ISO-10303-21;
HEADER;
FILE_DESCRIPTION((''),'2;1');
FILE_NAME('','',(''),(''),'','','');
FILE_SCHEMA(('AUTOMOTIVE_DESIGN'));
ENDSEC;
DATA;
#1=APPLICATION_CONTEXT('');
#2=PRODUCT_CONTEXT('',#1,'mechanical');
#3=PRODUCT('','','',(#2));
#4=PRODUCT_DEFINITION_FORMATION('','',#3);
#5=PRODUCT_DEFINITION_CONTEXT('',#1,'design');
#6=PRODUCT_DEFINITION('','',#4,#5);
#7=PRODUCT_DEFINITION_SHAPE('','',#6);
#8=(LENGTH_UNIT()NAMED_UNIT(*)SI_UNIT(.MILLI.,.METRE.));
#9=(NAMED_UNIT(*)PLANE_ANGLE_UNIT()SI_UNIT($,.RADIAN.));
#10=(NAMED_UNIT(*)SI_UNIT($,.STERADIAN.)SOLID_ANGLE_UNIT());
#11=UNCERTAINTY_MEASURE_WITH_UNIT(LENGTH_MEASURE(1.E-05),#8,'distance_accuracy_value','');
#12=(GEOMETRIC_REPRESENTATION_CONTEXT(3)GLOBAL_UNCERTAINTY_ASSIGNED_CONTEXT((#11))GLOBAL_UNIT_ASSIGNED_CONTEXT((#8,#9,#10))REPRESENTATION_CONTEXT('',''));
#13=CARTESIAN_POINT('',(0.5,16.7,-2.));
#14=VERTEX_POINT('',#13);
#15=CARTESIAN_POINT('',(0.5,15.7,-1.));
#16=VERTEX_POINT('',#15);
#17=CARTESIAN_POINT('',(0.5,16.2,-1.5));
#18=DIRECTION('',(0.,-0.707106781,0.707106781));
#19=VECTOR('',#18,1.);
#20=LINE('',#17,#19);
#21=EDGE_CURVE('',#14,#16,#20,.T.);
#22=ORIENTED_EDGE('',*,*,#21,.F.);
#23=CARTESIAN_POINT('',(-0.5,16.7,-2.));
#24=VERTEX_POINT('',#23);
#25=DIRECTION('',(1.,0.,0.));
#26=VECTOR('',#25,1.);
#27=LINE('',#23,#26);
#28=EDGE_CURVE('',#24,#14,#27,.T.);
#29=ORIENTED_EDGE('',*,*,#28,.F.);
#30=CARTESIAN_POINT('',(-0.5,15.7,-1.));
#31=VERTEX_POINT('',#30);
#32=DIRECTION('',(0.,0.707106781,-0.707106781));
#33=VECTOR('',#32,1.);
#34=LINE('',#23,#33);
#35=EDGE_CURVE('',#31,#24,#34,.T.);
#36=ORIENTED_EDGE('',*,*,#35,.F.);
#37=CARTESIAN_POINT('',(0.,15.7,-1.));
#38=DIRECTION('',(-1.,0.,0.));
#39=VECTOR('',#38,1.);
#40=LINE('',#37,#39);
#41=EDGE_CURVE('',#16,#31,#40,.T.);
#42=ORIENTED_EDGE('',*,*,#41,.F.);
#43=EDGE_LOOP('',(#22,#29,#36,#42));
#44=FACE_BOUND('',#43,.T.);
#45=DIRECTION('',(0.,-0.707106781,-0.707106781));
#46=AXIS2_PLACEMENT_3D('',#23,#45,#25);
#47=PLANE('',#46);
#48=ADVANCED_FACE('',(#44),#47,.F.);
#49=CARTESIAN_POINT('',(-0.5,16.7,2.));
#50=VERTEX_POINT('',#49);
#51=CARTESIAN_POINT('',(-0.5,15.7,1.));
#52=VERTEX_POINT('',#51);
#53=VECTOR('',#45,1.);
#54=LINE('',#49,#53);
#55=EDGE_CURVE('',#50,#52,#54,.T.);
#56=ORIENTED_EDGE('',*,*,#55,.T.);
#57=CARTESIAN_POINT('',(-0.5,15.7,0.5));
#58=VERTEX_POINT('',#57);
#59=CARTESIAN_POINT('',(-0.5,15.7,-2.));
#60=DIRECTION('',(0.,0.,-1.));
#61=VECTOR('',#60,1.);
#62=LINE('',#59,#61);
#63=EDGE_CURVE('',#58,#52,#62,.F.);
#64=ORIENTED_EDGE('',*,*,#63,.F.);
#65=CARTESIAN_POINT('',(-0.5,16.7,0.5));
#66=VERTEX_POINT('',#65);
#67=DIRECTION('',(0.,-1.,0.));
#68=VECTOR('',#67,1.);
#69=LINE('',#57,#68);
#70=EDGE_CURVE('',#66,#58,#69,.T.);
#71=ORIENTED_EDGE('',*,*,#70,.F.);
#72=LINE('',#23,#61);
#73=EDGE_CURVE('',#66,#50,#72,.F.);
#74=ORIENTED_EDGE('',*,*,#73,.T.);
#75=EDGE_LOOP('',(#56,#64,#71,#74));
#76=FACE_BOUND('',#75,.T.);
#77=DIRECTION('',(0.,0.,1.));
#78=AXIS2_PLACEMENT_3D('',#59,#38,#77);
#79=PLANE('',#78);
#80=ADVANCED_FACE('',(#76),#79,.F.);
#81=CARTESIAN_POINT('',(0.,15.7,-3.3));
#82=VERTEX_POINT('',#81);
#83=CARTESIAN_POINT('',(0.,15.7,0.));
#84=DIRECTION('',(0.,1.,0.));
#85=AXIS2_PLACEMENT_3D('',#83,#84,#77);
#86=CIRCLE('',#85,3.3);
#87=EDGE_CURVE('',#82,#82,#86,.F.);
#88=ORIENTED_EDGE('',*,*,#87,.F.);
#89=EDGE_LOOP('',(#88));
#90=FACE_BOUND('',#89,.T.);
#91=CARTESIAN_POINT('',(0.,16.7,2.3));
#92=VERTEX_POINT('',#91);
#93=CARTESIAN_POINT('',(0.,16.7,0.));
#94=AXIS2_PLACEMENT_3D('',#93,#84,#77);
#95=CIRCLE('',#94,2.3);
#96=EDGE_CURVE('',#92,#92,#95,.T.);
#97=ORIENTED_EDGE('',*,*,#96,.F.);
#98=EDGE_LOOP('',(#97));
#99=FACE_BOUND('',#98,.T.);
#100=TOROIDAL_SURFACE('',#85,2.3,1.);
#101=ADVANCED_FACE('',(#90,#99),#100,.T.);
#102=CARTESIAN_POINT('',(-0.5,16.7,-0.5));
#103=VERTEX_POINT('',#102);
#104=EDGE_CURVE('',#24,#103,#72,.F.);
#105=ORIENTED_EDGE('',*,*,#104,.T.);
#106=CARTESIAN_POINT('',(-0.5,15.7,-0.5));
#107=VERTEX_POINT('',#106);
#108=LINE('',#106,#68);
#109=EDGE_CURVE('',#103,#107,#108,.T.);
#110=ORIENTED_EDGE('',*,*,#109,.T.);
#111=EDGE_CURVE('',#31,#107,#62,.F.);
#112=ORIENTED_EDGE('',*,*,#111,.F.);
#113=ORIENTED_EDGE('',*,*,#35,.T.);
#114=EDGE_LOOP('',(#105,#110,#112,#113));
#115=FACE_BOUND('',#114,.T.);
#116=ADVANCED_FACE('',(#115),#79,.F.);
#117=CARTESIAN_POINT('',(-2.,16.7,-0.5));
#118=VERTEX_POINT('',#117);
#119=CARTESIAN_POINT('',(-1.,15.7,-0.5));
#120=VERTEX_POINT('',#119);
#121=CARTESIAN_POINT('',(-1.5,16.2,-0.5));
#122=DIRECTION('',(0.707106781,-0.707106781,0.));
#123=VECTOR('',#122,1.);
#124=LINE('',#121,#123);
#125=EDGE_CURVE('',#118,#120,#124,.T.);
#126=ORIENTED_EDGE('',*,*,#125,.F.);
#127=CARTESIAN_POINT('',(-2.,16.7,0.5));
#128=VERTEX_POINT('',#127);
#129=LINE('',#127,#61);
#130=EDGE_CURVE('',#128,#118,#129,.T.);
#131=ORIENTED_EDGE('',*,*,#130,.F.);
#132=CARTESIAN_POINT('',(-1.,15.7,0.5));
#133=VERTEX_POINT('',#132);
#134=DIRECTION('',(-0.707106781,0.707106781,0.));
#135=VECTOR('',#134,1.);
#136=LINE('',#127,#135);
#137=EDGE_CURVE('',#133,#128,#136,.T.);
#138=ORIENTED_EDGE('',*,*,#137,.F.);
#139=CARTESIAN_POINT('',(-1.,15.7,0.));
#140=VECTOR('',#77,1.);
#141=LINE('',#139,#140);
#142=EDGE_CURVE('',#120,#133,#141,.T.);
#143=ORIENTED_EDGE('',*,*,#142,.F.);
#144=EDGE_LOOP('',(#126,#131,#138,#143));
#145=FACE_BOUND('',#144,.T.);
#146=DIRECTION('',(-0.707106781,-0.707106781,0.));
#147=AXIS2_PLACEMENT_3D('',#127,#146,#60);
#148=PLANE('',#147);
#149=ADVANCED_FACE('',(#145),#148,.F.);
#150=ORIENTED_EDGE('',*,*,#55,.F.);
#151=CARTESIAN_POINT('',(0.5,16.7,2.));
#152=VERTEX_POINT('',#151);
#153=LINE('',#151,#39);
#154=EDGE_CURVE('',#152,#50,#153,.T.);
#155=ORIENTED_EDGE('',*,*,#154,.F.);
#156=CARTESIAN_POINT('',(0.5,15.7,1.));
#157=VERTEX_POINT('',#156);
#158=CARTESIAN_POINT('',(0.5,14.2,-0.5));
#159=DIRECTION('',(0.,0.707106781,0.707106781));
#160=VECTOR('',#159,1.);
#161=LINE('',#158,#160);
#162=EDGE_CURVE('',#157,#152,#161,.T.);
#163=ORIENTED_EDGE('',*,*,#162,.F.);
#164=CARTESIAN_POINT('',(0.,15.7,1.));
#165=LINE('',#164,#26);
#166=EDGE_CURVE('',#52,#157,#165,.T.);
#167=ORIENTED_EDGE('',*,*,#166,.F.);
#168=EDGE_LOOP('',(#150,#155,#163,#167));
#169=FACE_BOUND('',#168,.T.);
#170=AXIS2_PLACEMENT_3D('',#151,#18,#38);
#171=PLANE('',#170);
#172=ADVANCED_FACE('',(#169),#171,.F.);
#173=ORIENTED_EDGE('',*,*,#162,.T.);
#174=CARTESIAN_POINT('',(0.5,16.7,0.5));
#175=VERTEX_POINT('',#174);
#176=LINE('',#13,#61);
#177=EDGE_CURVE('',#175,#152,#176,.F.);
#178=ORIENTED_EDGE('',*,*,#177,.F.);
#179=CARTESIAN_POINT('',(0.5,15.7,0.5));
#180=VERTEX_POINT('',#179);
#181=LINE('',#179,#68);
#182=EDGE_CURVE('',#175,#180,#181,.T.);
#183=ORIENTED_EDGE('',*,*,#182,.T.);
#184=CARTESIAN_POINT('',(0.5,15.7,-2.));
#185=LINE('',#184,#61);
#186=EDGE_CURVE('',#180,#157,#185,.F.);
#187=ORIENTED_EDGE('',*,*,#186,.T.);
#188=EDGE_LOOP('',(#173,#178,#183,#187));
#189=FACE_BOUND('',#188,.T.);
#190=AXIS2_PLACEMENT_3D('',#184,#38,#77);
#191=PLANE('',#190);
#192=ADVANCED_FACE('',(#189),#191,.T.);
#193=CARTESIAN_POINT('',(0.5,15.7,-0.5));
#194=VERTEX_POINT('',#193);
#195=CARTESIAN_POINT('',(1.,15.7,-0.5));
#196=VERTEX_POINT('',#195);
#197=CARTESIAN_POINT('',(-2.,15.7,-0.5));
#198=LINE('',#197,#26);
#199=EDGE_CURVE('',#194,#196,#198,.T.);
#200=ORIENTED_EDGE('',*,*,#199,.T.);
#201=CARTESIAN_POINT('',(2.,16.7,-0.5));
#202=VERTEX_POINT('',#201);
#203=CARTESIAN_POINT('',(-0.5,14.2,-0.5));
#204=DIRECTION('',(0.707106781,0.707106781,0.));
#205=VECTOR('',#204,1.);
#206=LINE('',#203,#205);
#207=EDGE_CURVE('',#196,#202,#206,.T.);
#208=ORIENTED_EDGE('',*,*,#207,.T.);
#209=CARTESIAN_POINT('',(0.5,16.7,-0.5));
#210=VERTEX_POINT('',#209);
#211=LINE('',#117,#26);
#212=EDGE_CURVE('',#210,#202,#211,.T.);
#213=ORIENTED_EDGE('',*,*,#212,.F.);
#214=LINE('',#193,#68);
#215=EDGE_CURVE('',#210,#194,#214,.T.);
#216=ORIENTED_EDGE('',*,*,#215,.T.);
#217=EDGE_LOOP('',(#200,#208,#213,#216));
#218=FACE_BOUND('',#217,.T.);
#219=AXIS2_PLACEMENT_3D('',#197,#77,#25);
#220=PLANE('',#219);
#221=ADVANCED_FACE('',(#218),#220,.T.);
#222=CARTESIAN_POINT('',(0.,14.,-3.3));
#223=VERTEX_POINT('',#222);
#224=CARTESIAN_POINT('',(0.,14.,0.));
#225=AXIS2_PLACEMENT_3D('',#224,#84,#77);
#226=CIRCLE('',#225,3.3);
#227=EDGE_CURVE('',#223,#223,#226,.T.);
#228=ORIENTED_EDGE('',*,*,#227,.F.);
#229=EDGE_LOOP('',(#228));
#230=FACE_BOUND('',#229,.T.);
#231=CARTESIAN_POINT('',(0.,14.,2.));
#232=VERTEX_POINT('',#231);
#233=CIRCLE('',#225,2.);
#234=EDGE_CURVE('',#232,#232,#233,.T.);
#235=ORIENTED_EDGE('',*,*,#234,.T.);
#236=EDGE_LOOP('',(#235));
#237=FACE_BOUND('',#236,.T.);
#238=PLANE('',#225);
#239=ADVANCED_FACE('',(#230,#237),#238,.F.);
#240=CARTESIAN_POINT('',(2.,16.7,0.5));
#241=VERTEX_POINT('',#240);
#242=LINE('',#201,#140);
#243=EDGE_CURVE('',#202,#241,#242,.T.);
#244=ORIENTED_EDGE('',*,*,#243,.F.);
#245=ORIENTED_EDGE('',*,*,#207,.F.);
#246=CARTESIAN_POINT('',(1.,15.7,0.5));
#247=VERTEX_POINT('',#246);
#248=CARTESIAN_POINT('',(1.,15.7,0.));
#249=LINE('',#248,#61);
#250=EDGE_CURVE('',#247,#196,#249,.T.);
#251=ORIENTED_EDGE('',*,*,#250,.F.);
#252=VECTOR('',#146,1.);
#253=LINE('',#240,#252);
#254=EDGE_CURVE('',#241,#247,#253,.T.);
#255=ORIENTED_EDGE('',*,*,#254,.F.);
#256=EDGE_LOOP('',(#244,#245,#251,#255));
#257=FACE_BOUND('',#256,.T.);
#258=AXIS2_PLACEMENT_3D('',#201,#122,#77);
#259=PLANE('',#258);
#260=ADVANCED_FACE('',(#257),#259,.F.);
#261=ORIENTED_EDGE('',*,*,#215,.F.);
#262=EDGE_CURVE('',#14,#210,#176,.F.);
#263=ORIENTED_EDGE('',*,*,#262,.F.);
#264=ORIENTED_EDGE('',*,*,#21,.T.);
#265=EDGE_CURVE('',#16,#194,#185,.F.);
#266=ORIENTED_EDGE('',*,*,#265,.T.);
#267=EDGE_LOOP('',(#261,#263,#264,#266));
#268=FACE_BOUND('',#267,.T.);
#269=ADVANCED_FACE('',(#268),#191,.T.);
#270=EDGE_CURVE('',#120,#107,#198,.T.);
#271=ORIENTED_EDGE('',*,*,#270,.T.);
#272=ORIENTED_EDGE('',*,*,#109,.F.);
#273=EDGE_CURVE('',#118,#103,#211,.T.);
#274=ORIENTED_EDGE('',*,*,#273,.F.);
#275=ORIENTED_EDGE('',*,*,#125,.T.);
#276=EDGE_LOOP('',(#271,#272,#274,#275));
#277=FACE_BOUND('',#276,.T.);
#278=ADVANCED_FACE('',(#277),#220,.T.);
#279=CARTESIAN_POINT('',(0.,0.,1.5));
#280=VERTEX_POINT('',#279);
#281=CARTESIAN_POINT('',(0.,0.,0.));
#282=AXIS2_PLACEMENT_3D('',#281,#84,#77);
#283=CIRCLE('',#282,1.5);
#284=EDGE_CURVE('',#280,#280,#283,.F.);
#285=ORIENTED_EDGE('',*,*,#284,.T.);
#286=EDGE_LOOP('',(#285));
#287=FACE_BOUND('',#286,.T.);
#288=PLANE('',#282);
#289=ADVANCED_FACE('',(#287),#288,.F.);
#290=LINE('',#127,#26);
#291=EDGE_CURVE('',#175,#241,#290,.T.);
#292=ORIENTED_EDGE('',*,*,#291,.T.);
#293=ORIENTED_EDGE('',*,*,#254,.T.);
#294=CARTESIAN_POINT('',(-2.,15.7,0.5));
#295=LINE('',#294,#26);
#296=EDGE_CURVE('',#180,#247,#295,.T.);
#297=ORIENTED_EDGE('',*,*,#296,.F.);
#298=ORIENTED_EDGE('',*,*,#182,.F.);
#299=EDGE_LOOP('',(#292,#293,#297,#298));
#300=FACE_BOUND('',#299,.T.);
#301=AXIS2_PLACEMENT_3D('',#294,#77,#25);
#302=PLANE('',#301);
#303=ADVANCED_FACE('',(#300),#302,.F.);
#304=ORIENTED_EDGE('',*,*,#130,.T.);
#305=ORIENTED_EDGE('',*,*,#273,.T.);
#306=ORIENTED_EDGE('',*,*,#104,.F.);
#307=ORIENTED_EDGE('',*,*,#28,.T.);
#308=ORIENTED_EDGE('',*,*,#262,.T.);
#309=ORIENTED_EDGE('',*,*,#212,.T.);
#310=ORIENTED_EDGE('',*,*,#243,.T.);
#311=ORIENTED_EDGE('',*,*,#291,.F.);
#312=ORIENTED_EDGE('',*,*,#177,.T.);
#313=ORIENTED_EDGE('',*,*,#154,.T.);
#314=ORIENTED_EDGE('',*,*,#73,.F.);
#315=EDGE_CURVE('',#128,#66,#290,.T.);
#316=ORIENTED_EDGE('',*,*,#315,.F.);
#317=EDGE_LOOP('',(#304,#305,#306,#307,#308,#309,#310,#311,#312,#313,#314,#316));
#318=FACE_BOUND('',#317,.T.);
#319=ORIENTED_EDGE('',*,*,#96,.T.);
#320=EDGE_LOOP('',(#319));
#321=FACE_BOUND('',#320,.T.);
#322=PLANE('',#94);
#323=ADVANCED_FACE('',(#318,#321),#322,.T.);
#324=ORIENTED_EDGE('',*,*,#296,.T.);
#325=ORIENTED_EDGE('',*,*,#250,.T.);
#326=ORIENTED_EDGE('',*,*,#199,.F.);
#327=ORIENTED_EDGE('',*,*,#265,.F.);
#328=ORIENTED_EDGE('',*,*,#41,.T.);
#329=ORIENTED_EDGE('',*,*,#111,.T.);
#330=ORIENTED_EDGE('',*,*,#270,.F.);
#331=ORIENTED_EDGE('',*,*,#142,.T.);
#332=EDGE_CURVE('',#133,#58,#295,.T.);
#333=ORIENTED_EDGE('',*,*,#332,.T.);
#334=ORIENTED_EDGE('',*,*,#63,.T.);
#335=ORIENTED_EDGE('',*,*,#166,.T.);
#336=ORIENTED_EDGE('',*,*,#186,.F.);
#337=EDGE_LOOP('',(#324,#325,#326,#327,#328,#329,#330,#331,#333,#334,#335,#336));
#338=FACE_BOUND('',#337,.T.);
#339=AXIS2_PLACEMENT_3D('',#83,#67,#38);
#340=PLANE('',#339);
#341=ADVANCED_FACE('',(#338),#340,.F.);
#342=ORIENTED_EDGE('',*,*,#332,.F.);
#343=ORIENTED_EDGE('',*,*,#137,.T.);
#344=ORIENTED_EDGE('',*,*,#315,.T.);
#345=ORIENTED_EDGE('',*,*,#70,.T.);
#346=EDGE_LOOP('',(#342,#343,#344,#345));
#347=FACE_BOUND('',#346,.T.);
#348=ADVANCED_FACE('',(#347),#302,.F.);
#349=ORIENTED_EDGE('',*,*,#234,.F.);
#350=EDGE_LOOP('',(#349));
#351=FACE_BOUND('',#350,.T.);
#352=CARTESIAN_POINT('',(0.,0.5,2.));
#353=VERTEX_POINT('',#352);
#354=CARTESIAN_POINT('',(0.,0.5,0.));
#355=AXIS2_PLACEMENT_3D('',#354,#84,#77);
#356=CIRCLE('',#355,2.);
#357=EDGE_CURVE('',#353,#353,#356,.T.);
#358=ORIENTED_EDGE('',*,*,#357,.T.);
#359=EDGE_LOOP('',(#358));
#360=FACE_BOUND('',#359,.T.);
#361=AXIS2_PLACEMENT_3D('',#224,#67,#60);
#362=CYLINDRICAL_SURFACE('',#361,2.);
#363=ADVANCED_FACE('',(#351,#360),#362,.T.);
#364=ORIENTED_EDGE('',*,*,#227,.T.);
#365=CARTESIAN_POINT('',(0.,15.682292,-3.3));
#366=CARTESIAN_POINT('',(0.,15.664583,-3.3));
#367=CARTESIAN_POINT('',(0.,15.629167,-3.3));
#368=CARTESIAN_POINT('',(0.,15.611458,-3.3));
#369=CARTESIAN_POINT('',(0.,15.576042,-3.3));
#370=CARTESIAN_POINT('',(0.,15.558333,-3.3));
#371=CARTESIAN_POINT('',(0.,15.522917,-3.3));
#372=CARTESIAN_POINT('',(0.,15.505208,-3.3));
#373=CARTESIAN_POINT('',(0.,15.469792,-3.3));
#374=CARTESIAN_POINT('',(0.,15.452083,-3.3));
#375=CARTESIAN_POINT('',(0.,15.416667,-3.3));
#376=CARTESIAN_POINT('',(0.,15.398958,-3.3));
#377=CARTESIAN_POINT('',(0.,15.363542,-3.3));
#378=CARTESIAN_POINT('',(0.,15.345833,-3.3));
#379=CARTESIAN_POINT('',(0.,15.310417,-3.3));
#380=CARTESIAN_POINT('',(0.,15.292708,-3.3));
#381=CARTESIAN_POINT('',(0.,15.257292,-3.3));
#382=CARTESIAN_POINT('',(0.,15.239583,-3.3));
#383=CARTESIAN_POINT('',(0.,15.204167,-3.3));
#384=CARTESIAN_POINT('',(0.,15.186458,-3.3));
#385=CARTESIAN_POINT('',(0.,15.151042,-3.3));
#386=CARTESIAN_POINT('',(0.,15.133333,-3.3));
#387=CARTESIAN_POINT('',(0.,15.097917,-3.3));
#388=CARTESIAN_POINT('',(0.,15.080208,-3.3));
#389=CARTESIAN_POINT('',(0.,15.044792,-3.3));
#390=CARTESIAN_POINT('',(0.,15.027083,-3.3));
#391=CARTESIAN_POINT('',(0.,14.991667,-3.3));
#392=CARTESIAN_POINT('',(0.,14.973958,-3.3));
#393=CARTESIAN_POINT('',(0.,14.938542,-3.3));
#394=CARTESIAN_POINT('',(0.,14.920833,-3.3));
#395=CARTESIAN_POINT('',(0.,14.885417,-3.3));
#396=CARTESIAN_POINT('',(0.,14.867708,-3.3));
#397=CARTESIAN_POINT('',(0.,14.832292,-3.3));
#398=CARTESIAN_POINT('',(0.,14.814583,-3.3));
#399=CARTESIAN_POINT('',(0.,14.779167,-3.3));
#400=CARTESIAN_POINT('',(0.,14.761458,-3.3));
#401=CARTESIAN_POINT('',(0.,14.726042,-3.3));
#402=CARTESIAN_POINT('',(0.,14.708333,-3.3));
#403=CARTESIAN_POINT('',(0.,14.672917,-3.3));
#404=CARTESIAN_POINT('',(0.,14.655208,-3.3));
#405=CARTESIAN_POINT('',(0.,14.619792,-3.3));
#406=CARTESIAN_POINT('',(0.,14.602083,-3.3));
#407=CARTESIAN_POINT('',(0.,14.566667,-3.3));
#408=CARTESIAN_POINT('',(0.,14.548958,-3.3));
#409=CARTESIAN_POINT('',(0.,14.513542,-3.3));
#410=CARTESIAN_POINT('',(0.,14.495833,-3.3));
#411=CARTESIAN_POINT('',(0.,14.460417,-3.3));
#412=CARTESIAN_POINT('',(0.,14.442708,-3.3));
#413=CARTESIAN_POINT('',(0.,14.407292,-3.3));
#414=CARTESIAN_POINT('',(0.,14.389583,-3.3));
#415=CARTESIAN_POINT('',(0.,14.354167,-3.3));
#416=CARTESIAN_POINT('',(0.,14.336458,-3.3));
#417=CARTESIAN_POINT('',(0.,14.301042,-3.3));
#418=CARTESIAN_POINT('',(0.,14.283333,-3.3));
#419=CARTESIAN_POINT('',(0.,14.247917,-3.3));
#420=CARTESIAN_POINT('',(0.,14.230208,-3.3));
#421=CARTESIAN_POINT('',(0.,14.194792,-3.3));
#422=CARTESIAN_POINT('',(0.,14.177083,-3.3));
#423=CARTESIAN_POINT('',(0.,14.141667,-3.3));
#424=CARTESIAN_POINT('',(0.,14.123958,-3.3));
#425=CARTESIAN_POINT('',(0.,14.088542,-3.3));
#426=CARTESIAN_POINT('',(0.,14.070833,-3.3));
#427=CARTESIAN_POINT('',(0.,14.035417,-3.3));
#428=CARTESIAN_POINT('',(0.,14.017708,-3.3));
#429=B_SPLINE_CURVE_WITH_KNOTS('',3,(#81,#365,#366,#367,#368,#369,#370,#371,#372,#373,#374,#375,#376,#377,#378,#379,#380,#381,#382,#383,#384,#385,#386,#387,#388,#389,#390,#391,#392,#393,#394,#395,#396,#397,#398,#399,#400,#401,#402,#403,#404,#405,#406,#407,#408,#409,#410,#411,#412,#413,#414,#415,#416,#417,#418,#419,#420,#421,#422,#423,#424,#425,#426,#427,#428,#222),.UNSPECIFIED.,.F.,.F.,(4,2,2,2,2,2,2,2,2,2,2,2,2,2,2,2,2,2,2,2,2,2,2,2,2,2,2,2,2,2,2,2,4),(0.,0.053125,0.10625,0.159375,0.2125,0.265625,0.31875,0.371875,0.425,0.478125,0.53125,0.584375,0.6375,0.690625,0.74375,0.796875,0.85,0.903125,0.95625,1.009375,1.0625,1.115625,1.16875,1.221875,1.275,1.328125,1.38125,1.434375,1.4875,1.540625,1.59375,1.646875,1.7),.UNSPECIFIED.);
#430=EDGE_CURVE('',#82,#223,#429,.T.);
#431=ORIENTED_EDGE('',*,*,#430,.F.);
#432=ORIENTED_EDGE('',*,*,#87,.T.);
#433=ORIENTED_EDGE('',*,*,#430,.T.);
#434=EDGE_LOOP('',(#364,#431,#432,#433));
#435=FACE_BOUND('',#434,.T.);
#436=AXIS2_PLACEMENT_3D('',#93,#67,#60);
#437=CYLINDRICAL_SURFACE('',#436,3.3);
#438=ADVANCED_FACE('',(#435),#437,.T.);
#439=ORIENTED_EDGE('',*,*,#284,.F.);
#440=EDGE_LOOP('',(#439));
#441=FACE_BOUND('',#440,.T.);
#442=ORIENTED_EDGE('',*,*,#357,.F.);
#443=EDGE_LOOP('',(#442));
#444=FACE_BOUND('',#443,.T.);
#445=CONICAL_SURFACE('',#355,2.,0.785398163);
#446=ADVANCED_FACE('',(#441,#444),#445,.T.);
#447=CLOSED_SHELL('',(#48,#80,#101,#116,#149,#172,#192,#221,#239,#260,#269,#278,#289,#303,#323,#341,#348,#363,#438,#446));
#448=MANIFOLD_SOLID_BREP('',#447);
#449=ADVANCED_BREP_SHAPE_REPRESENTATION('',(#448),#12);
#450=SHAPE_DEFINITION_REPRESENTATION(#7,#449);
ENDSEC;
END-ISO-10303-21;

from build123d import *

# Parameters (mm, degrees)
SKETCH_1_R          = 2
EXTRUDE_1_DEPTH     = 14
SKETCH_2_R          = 3.3
EXTRUDE_2_DEPTH     = 2.7
FILLET_1_R          = 1
CHAMFER_1_SIZE      = 0.5
SKETCH_3_W          = 4
SKETCH_3_H          = 1
SKETCH_3_W_2        = 1
SKETCH_3_H_2        = 4
CUT_EXTRUDE_1_DEPTH = 1
CHAMFER_2_SIZE      = 1


with BuildPart() as part:
    # 草图1 → 凸台-拉伸1 (new body)
    with BuildSketch(Plane(origin=(0, 0, 0), x_dir=(1, 0, 0), z_dir=(0, 1, 0))):
        with Locations(Location((0, 0, 0), (0, 0, 270))):
            Circle(SKETCH_1_R)
    extrude(amount=EXTRUDE_1_DEPTH)

    # 草图2 → 凸台-拉伸2 (add)
    with BuildSketch(Plane(origin=(0, 14, 0), x_dir=(1, 0, 0), z_dir=(0, 1, 0))):
        with Locations(Location((0, 0, 0), (0, 0, 90))):
            Circle(SKETCH_2_R)
    extrude(amount=EXTRUDE_2_DEPTH)

    # 圆角1
    fillet_1_edges = [part.edges().sort_by_distance(p)[0] for p in [
        (0, 16.7, 3.3),
    ]]
    fillet(fillet_1_edges, radius=FILLET_1_R)

    # 倒角1
    chamfer_1_edges = [part.edges().sort_by_distance(p)[0] for p in [
        (0, 0, -2),
    ]]
    chamfer(chamfer_1_edges, length=CHAMFER_1_SIZE)

    # 草图3 → 切除-拉伸-薄壁1 (cut)
    with BuildSketch(Plane(origin=(0, 16.7, 0), x_dir=(1, 0, 0), z_dir=(0, 1, 0))):
        Rectangle(SKETCH_3_W, SKETCH_3_H)
        Rectangle(SKETCH_3_W_2, SKETCH_3_H_2)
    extrude(amount=-CUT_EXTRUDE_1_DEPTH, mode=Mode.SUBTRACT)

    # 倒角2
    chamfer_2_edges = [part.edges().sort_by_distance(p)[0] for p in [
        (0, 15.7, 2),
        (2, 15.7, 0),
        (0, 15.7, -2),
        (-2, 15.7, 0),
    ]]
    chamfer(chamfer_2_edges, length=CHAMFER_2_SIZE - 0.0001)  # a hair under: the kernel refuses the full size


solid = part.part
